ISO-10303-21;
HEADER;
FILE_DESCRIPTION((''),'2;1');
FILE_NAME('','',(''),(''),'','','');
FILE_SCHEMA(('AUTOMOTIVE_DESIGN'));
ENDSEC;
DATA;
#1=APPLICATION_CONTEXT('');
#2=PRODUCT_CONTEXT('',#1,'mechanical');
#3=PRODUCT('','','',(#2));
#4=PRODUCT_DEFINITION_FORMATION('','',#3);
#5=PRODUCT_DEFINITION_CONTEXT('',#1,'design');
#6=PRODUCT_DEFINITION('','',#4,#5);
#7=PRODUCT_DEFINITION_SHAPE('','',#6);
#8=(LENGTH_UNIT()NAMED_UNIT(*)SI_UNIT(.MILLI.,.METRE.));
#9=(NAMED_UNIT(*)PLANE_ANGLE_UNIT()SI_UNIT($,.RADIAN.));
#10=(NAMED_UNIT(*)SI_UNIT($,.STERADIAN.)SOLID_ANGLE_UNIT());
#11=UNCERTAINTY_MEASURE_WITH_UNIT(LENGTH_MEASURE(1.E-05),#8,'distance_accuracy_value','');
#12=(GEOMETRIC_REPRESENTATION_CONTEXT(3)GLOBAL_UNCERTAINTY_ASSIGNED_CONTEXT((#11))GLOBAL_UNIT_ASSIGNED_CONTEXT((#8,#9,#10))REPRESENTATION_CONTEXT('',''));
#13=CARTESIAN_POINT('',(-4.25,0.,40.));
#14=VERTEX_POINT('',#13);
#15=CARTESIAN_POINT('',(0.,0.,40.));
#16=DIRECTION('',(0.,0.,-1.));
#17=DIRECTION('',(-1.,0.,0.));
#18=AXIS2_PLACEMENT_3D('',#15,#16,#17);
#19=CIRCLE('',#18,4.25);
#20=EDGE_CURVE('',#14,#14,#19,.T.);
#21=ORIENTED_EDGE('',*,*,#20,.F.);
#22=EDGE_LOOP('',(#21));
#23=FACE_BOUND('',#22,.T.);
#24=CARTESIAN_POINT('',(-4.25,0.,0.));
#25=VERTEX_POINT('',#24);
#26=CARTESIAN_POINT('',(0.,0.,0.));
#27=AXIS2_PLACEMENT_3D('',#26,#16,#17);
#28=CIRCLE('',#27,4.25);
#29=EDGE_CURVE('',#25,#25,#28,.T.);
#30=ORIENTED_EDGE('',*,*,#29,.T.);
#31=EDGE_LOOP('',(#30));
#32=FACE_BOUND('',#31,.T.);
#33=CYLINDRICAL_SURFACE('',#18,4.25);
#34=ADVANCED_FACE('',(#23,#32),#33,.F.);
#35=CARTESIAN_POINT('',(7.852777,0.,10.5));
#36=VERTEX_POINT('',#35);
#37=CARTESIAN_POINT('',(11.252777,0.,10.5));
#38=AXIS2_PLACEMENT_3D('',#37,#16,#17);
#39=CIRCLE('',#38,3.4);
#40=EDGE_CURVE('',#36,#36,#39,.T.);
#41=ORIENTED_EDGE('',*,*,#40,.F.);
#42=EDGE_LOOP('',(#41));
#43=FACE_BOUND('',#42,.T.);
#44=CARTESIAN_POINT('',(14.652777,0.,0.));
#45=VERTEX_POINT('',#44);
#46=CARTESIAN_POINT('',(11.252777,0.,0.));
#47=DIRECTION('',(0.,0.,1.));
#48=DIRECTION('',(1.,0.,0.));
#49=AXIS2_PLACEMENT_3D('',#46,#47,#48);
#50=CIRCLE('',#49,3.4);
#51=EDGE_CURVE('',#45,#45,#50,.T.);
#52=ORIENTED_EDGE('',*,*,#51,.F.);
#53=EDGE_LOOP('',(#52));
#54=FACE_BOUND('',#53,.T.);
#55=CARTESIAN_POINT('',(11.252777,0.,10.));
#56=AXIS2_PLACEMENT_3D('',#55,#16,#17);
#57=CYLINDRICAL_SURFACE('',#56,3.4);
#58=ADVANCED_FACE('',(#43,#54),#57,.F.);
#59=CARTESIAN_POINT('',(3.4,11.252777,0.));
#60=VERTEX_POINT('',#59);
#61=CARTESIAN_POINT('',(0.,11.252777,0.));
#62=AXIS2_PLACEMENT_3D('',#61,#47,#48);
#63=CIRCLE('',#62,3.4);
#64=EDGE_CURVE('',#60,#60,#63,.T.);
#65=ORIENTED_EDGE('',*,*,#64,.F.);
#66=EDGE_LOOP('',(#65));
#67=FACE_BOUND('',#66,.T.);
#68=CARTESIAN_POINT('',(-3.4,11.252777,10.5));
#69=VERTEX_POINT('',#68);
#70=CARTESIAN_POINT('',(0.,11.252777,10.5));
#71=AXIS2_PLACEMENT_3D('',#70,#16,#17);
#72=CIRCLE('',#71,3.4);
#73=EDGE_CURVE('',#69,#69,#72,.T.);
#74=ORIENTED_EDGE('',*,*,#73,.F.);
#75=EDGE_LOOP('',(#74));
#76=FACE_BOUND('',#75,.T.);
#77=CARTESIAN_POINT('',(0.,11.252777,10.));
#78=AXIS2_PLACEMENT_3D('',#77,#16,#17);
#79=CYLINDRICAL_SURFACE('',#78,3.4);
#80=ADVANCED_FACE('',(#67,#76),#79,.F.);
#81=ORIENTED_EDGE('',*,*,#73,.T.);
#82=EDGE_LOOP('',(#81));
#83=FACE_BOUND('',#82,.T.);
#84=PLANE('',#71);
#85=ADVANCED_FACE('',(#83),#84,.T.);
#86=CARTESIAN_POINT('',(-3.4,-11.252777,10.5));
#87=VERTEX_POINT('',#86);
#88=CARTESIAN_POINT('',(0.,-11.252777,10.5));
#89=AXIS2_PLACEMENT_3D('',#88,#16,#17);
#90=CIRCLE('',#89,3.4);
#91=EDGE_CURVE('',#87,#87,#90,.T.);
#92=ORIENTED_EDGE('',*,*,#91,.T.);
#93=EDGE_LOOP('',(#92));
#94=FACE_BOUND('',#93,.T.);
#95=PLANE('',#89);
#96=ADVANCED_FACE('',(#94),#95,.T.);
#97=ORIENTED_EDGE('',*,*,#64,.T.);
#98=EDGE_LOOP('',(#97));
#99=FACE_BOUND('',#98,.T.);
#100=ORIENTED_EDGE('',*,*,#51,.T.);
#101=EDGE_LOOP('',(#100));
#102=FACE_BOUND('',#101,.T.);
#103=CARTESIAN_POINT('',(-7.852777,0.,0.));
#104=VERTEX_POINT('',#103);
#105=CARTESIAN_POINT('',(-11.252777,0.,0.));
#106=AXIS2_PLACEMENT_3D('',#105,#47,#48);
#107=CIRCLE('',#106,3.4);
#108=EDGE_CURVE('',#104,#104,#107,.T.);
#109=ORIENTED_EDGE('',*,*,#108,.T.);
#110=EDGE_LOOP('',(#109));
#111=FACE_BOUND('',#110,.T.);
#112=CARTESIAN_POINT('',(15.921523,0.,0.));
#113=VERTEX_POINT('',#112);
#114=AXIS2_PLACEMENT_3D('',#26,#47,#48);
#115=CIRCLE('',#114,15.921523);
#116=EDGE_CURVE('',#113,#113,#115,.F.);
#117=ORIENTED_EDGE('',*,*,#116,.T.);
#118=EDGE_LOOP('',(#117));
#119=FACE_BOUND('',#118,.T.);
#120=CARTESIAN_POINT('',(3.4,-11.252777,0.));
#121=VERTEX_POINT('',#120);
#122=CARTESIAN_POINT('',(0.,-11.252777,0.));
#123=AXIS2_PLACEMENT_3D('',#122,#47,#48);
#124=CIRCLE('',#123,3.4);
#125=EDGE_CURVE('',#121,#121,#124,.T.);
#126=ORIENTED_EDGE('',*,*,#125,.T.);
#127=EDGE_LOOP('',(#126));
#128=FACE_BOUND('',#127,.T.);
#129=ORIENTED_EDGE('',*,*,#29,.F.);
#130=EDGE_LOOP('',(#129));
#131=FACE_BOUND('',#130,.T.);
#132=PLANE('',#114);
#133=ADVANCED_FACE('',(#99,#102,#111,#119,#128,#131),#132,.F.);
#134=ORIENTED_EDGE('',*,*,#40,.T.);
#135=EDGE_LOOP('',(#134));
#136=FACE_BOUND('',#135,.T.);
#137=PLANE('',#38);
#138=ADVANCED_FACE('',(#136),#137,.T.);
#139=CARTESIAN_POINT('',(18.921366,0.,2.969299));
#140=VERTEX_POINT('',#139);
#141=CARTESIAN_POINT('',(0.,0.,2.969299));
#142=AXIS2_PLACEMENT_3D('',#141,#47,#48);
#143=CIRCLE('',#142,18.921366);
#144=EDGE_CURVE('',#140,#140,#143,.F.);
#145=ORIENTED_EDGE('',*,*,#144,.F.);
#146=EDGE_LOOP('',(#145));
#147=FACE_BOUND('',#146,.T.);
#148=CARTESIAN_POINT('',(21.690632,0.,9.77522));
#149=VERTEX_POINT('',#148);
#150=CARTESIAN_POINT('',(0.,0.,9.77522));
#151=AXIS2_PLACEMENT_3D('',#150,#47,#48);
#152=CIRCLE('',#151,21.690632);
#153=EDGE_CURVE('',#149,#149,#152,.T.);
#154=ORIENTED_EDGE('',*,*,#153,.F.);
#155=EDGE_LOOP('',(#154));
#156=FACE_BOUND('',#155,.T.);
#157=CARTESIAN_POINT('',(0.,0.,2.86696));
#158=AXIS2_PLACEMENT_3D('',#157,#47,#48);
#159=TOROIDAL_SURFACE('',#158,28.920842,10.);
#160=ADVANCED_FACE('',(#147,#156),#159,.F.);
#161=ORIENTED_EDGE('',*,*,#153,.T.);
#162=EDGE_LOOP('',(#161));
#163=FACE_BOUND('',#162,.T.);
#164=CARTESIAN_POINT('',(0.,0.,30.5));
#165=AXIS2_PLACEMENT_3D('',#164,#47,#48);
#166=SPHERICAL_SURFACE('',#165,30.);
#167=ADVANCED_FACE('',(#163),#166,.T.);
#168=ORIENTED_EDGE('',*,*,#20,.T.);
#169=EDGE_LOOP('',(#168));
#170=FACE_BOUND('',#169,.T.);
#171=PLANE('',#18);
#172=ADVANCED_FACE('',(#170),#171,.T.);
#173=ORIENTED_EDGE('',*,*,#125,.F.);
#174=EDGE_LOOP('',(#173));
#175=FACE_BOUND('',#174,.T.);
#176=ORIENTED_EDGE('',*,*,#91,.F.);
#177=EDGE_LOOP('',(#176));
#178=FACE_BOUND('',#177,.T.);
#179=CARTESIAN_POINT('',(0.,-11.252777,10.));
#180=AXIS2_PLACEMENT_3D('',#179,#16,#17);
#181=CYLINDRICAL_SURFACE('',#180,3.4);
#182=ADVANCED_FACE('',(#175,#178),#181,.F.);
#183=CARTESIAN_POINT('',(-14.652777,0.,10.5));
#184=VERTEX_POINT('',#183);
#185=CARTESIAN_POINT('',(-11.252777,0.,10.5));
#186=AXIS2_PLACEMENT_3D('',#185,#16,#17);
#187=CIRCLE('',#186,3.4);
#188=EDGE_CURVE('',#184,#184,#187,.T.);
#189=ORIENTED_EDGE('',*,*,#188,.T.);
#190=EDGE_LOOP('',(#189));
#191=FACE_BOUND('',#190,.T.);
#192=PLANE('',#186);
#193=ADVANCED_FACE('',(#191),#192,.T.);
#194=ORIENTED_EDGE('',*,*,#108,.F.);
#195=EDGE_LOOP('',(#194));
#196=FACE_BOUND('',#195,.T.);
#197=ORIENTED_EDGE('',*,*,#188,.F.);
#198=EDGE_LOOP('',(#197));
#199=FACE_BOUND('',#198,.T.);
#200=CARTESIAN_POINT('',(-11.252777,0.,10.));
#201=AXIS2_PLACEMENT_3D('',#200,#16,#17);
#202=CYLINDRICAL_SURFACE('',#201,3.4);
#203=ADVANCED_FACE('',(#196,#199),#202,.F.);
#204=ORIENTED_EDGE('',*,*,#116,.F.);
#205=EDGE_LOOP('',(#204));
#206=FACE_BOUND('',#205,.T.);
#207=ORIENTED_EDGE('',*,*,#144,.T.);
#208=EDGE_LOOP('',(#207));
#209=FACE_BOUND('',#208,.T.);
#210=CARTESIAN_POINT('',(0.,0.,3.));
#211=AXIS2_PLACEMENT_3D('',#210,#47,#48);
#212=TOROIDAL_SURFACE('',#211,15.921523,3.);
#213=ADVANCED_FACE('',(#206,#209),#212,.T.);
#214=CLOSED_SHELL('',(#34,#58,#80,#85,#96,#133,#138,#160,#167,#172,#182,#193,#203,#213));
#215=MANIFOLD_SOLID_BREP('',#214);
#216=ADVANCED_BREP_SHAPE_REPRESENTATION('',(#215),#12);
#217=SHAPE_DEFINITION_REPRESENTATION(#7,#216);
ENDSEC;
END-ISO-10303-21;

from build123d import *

# Parameters (mm, degrees)
SKETCH2_R           = 18.921523051
SKETCH2_R_2         = 3.4
BOSS_EXTRUDE1_DEPTH = 10
FILLET1_R           = 3
SKETCH3_R           = 18.921523051
SKETCH3_R_2         = 3.4
BOSS_EXTRUDE2_DEPTH = 0.5
SKETCH4_R           = 18.921523051
BOSS_EXTRUDE3_DEPTH = 5
SKETCH8_R           = 18.921523051
BOSS_EXTRUDE4_DEPTH = 15
SKETCH10_R          = 4.25
CUT_EXTRUDE2_DEPTH  = 40
FILLET2_R           = 10
SKETCH11_R          = 3.4
CUT_EXTRUDE3_DEPTH  = 10.5


with BuildPart() as part:
    # Sketch2 → Boss-Extrude1 (new body)
    with BuildSketch(Plane.XY):
        Circle(SKETCH2_R)
        with Locations((0, 11.25277675)):
            Circle(SKETCH2_R_2, mode=Mode.SUBTRACT)
        with Locations((11.25277675, 0)):
            Circle(SKETCH2_R_2, mode=Mode.SUBTRACT)
        with Locations((0, -11.25277675)):
            Circle(SKETCH2_R_2, mode=Mode.SUBTRACT)
        with Locations((-11.25277675, 0)):
            Circle(SKETCH2_R_2, mode=Mode.SUBTRACT)
    extrude(amount=BOSS_EXTRUDE1_DEPTH)

    # Fillet1
    fillet1_edges = [part.edges().sort_by_distance(p)[0] for p in [
        (-18.921523051, 0, 0),
    ]]
    fillet(fillet1_edges, radius=FILLET1_R)

    # Sketch3 → Boss-Extrude2 (add)
    with BuildSketch(Plane.XY.offset(10)):
        Circle(SKETCH3_R)
        with Locations((0, 11.25277675)):
            Circle(SKETCH3_R_2, mode=Mode.SUBTRACT)
        with Locations((11.25277675, 0)):
            Circle(SKETCH3_R_2, mode=Mode.SUBTRACT)
        with Locations((-11.25277675, 0)):
            Circle(SKETCH3_R_2, mode=Mode.SUBTRACT)
        with Locations((0, -11.25277675)):
            Circle(SKETCH3_R_2, mode=Mode.SUBTRACT)
    extrude(amount=BOSS_EXTRUDE2_DEPTH)

    # Sketch4 → Boss-Extrude3 (add)
    with BuildSketch(Plane.XY.offset(10.5)):
        Circle(SKETCH4_R)
    extrude(amount=BOSS_EXTRUDE3_DEPTH)

    # Sketch8 → Boss-Extrude4 (add)
    with BuildSketch(Plane.XY.offset(15.5)):
        Circle(SKETCH8_R)
    extrude(amount=BOSS_EXTRUDE4_DEPTH)

    # Sketch9 → Revolve2 (revolve)
    with BuildSketch(Plane.XY.offset(30.5)):
        with BuildLine():
            ThreePointArc((0, -30), (30, 0), (0, 30))
            Line((0, 30), (0, -30))
        make_face()
    revolve(axis=Axis((0, 0, 30.5), (0, 1, 0)))

    # Sketch10 → Cut-Extrude2 (cut)
    with BuildSketch(Plane(origin=(0, 0, 0), x_dir=(-1, 0, 0), z_dir=(0, 0, -1))):
        Circle(SKETCH10_R)
    extrude(amount=-CUT_EXTRUDE2_DEPTH, mode=Mode.SUBTRACT)

    # Fillet2
    fillet2_edges = [part.edges().sort_by_distance(p)[0] for p in [
        (-18.921523048, 0, 7.219622739),
    ]]
    fillet(fillet2_edges, radius=FILLET2_R)

    # Sketch11 → Cut-Extrude3 (cut)
    with BuildSketch(Plane(origin=(0, 0, 0), x_dir=(-1, 0, 0), z_dir=(0, 0, -1))):
        with Locations((0, -11.25277675)):
            Circle(SKETCH11_R)
        with Locations((-11.25277675, 0)):
            Circle(SKETCH11_R)
        with Locations((0, 11.25277675)):
            Circle(SKETCH11_R)
        with Locations((11.25277675, 0)):
            Circle(SKETCH11_R)
    extrude(amount=-CUT_EXTRUDE3_DEPTH, mode=Mode.SUBTRACT)


solid = part.part
